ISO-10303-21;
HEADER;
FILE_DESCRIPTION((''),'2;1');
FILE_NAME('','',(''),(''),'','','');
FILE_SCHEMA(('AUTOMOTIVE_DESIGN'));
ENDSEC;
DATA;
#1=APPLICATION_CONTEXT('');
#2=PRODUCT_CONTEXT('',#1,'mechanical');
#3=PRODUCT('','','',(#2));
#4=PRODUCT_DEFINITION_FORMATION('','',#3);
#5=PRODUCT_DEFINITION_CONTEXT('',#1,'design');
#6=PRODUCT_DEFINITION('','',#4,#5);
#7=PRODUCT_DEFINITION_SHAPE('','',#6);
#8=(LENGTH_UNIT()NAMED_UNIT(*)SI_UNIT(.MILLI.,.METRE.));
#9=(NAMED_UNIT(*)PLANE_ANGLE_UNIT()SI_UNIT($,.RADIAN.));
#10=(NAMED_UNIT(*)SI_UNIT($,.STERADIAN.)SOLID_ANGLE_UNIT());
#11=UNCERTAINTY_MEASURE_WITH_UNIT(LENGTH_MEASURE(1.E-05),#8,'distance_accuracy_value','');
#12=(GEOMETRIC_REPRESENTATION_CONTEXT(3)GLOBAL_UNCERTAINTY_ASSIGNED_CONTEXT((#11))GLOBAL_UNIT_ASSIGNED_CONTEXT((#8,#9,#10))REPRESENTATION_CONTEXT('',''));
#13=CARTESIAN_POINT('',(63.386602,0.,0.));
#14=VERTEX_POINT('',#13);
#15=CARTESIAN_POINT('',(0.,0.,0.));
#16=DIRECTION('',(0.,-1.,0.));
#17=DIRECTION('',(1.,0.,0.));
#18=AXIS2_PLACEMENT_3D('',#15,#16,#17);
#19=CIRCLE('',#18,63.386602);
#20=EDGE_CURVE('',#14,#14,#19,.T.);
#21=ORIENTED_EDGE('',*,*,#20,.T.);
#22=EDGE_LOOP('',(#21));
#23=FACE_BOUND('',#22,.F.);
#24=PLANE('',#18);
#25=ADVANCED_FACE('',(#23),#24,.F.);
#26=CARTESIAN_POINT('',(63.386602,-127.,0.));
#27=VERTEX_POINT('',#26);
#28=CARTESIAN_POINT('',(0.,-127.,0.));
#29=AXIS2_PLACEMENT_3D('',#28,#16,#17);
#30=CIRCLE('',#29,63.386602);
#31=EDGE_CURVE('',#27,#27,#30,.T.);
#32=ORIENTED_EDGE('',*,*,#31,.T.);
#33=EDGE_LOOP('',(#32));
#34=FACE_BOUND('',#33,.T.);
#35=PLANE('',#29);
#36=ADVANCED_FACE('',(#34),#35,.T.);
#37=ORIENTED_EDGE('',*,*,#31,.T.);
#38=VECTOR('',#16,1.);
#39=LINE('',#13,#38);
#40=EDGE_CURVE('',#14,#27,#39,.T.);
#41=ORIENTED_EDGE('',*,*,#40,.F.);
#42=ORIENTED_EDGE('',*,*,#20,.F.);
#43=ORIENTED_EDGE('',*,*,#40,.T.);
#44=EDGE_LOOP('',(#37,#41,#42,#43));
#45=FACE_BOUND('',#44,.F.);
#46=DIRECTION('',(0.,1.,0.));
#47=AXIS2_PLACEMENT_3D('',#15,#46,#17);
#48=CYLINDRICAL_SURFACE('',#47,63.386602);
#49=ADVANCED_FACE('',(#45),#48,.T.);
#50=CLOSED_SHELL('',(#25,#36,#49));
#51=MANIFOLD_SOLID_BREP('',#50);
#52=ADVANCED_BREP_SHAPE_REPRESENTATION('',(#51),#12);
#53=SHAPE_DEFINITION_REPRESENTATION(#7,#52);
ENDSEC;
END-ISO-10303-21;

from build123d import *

# Parameters (mm, degrees)
F2_R     = 63.3866016578
F3_DEPTH = 127


# Not quite as in the source:
# - the program builds the solid bodies; features that only make, move or delete a surface that nothing else refers to are left out


with BuildPart() as f3:
    # F2 (on face) → F3 (new body)
    with BuildSketch(Plane.XZ):
        Circle(F2_R)
    extrude(amount=F3_DEPTH)


solid = f3.part
